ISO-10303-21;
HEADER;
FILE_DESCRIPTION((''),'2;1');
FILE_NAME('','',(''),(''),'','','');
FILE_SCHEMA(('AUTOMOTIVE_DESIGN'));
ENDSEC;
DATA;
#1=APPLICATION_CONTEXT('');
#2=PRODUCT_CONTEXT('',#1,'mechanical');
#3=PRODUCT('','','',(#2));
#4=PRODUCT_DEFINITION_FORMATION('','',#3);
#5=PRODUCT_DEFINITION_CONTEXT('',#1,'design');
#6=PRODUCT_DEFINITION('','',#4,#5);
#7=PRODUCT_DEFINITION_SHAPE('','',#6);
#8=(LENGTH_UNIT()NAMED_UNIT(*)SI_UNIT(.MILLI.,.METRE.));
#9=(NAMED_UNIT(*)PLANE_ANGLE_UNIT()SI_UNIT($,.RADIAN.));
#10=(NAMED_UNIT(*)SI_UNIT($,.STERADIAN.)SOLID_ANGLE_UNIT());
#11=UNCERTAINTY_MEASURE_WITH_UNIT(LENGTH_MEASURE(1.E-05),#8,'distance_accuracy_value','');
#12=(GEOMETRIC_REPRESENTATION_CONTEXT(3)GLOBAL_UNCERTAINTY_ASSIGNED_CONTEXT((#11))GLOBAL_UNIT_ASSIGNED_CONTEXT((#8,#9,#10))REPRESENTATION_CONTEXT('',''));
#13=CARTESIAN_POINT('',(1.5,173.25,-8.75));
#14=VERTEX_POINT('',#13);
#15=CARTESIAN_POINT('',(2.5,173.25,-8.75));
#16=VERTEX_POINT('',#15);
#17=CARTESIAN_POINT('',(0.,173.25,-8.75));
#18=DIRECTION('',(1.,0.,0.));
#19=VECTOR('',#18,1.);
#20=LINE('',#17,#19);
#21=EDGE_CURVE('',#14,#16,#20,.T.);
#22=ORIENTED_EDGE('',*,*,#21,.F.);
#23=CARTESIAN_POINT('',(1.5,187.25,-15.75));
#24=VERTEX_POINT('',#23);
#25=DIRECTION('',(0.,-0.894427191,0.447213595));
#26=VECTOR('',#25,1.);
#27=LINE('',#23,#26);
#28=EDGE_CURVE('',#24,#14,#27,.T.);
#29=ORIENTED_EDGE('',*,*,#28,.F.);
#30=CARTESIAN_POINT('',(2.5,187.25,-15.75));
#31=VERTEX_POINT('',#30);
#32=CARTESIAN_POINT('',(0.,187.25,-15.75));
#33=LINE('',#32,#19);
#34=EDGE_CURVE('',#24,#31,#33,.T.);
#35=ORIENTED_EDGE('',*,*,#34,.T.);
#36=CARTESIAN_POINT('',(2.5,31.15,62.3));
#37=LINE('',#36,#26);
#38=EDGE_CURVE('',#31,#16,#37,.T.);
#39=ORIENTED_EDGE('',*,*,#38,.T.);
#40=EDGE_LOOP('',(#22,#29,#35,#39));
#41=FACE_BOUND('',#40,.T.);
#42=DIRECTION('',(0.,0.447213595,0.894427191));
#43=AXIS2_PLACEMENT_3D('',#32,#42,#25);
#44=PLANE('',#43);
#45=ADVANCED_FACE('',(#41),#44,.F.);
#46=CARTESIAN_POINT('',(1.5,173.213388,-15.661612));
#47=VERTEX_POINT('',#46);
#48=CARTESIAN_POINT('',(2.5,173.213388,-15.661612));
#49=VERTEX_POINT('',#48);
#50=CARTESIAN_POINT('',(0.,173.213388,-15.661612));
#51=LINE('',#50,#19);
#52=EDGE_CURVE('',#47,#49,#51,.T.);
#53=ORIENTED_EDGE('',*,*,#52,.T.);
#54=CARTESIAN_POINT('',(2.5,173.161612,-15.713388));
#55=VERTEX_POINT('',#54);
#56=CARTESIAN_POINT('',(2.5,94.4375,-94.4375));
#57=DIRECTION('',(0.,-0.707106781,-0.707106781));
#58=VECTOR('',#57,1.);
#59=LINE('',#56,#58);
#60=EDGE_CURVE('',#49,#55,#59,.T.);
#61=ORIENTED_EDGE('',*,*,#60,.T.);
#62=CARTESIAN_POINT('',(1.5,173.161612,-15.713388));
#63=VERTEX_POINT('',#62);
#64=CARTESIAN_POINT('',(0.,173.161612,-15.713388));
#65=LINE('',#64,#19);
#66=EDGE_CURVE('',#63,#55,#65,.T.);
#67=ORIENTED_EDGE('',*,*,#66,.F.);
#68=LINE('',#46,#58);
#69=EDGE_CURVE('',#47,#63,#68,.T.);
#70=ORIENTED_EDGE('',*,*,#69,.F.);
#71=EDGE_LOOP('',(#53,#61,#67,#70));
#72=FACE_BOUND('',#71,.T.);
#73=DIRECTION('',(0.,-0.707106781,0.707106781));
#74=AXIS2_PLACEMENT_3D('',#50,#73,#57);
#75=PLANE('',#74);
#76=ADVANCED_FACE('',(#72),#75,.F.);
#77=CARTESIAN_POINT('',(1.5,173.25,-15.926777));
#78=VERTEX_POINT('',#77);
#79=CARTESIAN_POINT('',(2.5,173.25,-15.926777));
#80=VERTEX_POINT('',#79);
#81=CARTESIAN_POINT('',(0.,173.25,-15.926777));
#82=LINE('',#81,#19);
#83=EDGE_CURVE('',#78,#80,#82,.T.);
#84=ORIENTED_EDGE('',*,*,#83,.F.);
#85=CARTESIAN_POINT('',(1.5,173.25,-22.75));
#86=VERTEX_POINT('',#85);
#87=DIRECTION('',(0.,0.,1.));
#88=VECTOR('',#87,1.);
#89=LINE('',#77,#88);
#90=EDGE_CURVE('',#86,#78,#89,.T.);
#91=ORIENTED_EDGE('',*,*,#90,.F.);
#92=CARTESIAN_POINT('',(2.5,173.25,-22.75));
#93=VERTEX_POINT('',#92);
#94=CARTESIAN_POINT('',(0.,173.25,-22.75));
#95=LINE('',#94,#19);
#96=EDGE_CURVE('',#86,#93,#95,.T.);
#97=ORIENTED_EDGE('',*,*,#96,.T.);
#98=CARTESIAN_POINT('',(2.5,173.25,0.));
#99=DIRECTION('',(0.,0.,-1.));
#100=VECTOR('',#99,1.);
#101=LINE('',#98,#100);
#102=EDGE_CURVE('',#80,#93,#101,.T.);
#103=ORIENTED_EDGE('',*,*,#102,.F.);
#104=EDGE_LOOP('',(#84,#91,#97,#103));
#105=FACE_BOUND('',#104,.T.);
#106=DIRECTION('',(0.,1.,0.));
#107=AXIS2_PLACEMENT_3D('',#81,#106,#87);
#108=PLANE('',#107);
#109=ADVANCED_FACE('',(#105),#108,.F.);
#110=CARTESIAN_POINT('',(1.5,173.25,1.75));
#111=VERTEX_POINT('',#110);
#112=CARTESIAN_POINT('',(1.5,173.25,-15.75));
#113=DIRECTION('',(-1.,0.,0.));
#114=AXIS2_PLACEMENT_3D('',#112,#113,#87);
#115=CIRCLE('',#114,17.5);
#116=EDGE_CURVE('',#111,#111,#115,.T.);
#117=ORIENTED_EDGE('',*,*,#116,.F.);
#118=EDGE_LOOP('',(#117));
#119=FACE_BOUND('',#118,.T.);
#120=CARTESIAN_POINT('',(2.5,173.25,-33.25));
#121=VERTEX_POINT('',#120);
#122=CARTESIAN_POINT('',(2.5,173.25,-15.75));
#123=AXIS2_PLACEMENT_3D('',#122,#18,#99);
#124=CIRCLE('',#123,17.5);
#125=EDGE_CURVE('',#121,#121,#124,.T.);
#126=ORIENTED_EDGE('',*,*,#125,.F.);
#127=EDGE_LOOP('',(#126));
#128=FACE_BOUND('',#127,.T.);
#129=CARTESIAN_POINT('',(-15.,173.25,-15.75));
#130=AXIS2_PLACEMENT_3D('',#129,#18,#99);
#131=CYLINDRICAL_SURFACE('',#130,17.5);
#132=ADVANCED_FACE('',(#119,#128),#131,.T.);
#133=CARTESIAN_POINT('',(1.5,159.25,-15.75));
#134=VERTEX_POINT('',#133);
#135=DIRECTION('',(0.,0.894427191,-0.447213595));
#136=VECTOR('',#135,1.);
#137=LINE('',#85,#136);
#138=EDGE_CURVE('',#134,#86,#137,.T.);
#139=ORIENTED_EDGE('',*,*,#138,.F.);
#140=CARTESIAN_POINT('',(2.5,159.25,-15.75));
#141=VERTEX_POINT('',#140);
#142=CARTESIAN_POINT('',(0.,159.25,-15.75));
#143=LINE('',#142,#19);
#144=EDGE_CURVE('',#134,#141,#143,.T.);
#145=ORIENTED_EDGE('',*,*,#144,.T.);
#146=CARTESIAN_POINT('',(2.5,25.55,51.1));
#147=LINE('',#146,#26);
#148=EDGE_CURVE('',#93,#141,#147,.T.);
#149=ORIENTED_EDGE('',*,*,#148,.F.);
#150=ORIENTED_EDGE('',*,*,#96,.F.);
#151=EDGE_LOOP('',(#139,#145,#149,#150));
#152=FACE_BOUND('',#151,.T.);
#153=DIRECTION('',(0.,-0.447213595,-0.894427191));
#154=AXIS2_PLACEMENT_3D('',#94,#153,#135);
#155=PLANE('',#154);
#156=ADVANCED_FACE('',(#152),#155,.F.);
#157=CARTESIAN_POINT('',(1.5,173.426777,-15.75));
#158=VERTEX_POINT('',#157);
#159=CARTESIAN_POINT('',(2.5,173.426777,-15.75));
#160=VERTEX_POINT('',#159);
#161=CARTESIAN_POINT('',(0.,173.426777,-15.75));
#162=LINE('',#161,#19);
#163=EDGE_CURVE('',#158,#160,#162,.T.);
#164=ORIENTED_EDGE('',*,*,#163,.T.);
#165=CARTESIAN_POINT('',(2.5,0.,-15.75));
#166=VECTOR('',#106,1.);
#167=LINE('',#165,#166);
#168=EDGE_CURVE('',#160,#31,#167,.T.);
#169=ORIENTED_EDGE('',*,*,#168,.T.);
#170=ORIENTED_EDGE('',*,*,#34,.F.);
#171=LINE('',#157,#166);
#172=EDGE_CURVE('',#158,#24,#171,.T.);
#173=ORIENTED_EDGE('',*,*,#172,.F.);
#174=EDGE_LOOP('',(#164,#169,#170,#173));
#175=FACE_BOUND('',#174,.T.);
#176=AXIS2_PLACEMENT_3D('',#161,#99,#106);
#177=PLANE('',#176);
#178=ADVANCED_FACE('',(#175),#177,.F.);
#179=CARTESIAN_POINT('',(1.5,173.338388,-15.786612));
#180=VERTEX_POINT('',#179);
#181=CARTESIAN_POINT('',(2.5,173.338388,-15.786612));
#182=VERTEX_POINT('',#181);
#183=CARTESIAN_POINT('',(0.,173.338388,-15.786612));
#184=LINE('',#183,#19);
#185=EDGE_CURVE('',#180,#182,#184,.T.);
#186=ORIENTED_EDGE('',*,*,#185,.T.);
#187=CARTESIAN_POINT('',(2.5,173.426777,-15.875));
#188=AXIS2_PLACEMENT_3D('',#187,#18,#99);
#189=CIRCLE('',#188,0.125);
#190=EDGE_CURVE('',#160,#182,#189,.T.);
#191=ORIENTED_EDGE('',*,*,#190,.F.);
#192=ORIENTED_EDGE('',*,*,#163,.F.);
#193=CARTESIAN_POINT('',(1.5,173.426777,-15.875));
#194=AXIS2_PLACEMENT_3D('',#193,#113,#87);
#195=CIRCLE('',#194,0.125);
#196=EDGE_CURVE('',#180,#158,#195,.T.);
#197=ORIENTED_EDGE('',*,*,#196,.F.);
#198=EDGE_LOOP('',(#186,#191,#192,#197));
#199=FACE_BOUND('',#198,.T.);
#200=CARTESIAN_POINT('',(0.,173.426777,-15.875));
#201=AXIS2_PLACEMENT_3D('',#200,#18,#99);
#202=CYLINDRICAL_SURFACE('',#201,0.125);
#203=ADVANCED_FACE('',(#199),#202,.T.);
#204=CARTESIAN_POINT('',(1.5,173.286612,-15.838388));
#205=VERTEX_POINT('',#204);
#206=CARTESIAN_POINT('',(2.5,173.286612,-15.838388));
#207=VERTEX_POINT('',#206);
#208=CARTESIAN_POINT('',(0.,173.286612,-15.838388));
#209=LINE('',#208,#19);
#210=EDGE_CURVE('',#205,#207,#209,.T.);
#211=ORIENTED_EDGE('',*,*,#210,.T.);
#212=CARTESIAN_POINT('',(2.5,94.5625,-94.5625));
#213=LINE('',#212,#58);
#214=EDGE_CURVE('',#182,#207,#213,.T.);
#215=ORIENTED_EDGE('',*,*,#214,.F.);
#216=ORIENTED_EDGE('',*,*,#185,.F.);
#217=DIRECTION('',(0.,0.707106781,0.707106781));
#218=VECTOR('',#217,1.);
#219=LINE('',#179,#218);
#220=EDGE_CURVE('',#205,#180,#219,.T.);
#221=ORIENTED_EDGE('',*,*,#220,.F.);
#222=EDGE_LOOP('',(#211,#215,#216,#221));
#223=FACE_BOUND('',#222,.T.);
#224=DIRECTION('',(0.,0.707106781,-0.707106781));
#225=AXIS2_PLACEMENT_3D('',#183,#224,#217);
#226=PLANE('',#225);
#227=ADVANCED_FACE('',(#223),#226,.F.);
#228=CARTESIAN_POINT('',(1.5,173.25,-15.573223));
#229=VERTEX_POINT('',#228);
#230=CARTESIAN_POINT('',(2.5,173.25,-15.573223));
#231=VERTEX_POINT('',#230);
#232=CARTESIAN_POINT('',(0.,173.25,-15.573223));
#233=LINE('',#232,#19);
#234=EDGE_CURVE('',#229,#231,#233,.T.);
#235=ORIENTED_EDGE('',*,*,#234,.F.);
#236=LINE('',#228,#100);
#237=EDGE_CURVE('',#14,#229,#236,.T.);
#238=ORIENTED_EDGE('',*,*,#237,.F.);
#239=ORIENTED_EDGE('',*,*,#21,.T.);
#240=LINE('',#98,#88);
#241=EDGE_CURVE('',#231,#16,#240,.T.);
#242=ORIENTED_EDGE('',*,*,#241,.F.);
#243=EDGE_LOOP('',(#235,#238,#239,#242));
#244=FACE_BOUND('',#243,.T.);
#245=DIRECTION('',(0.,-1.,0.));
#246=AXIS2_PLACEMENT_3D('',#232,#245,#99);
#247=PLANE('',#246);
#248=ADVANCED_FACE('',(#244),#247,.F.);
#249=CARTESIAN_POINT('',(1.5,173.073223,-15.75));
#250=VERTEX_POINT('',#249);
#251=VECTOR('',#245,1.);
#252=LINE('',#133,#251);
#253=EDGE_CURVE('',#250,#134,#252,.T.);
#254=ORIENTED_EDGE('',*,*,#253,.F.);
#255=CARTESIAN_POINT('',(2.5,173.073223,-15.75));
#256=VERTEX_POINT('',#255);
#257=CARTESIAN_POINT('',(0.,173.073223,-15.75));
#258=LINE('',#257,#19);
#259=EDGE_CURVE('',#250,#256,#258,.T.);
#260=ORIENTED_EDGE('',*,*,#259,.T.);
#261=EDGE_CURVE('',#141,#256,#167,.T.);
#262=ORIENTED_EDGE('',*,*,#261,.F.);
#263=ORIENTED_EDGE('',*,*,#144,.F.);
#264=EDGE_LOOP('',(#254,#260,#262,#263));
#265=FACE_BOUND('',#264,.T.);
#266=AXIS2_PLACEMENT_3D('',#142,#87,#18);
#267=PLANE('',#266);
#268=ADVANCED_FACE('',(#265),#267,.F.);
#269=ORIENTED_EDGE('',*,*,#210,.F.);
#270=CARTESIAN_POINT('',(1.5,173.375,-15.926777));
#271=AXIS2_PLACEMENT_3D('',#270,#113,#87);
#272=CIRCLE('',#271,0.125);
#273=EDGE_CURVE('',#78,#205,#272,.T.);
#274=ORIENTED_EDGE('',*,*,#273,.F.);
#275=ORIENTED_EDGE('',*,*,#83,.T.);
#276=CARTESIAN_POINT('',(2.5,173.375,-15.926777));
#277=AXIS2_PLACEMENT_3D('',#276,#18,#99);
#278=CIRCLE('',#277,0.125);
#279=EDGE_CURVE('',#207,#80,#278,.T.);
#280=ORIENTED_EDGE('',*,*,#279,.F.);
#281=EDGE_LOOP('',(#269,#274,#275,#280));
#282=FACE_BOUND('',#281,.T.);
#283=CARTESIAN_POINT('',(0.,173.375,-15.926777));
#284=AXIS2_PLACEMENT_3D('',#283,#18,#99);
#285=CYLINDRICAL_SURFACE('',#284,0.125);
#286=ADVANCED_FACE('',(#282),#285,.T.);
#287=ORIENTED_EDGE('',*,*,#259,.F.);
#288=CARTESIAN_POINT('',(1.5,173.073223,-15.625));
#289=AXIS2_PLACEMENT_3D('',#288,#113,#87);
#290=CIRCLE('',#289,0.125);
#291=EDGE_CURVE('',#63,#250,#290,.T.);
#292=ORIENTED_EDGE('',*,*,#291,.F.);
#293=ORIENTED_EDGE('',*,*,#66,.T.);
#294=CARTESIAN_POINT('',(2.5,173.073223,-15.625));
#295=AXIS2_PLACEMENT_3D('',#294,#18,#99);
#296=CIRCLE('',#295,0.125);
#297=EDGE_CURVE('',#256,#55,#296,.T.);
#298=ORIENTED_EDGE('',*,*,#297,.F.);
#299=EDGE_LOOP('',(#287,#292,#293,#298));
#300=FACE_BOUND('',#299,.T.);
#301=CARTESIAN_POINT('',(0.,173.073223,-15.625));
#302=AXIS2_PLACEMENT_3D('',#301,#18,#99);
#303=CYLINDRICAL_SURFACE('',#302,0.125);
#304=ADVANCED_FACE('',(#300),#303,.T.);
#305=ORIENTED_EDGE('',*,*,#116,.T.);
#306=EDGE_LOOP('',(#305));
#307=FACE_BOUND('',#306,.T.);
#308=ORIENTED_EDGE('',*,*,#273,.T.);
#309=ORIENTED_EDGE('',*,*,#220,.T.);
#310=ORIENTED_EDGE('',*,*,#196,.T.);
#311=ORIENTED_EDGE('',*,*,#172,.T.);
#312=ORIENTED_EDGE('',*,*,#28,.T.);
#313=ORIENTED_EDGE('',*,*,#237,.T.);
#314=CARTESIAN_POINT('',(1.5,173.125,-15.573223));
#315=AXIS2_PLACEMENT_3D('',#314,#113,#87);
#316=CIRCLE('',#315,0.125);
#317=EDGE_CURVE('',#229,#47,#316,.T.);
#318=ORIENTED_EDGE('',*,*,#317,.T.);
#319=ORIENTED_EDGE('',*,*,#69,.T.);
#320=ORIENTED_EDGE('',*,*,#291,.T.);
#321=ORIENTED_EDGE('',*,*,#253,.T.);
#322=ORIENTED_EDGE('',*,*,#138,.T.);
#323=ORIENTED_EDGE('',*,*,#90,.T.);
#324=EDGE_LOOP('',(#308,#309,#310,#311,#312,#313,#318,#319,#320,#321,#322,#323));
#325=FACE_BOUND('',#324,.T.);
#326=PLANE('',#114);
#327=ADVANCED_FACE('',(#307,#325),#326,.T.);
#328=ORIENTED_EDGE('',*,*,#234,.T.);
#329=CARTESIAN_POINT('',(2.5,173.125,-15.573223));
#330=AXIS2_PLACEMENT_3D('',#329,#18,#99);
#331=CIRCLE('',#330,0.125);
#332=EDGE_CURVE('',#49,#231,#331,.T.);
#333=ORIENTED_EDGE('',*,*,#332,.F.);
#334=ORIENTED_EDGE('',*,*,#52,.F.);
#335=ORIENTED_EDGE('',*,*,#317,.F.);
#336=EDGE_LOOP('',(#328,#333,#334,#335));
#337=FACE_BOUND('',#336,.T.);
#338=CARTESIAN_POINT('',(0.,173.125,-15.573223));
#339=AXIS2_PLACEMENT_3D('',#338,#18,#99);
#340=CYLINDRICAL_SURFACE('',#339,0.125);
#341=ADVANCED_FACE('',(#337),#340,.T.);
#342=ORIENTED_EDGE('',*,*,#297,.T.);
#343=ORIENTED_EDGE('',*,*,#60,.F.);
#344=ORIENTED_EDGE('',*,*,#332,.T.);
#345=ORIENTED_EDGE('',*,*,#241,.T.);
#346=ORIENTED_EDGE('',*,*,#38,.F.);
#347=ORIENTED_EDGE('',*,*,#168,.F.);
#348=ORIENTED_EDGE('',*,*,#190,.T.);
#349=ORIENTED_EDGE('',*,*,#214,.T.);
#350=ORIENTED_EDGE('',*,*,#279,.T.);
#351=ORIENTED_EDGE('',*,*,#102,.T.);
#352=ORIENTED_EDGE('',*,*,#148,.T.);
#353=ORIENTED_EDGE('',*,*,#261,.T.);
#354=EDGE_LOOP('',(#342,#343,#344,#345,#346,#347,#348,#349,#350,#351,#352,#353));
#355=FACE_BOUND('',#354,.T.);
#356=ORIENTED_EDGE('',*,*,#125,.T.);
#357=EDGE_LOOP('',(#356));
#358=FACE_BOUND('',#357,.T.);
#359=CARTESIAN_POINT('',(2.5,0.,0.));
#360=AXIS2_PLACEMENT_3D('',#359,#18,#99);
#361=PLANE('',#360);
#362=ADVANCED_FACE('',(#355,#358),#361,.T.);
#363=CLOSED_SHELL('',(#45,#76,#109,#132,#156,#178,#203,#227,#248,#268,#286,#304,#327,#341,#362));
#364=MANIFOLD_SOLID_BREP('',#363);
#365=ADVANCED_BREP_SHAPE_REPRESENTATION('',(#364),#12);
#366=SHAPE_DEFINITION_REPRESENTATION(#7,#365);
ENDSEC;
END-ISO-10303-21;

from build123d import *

# Parameters (mm, degrees)
SKETCH1_W               = 85
SKETCH1_H               = 200
BOSS_EXTRUDE1_DEPTH     = 5
FILLET1_R               = 1
SKETCH2_R               = 17.5
CUT_EXTRUDE1_DEPTH      = 2.5
FILLET2_R               = 0.125
SKETCH3_W               = 15
SKETCH3_H               = 85
BOSS_EXTRUDE2_DEPTH     = 3
RIB1_START              = -5
RIB1_DEPTH              = 5
SKETCH5_R               = 1.5
CUT_EXTRUDE2_DEPTH      = 3
FILLET3_R               = 4
FILLET4_R               = 3
SKETCH6_OUTSIDE_W       = 130.646
SKETCH6_OUTSIDE_H       = 245.646
SKETCH6_OUTSIDE_R       = 17.5
CUT_EXTRUDE4_DEPTH      = 206.441597541
CUT_EXTRUDE5_DEPTH      = 194.642389471
CUT_EXTRUDE5_DEPTH_BACK = 194.642389471
CUT_EXTRUDE6_START      = -1.5
SKETCH9_R               = 17.5
CUT_EXTRUDE6_DEPTH      = 1.5


# Read off the part's stored shape, not the designer's step: Rib1
with BuildPart() as part:
    # Sketch1 → Boss-Extrude1 (new body)
    with BuildSketch(Plane(origin=(0, 0, 0), x_dir=(0, 0, -1), z_dir=(1, 0, 0))):
        with Locations((0, 100)):
            Rectangle(SKETCH1_W, SKETCH1_H)
        Polygon((-16, 25), (-16, 176), (-11, 176), (-11, 49), (-7, 49), (-7, 29), (-2.5, 29), (-2.5, 42), (16, 42), (16, 25), (16, 24), (15, 24), (-15, 24), (-16, 24), align=None, mode=Mode.SUBTRACT)
    extrude(amount=BOSS_EXTRUDE1_DEPTH)

    # Fillet1
    fillet1_edges = [part.edges().sort_by_distance(p)[0] for p in [
        (2.5, 42, 2.5),
        (2.5, 29, 2.5),
        (2.5, 29, 7),
        (2.5, 49, 11),
    ]]
    fillet(fillet1_edges, radius=FILLET1_R)

    # Sketch2 → Cut-Extrude1 (cut)
    with BuildSketch(Plane(origin=(5, 0, 0), x_dir=(0, 0, -1), z_dir=(1, 0, 0))):
        with Locations((15.75, 173.25)):
            Circle(SKETCH2_R)
        Polygon((15.75, 173.125), (15.625, 173.25), (8.75, 173.25), (15.75, 187.25), (15.75, 173.375), (15.875, 173.25), (22.75, 173.25), (15.75, 159.25), align=None, mode=Mode.SUBTRACT)
    extrude(amount=-CUT_EXTRUDE1_DEPTH, mode=Mode.SUBTRACT)

    # Fillet2
    fillet2_edges = [part.edges().sort_by_distance(p)[0] for p in [
        (3.75, 173.25, -15.625),
        (3.75, 173.125, -15.75),
        (3.75, 173.25, -15.875),
        (3.75, 173.375, -15.75),
    ]]
    fillet(fillet2_edges, radius=FILLET2_R)

    # Sketch3 → Boss-Extrude2 (add)
    with BuildSketch(Plane.XZ):
        with Locations((-7.5, 0)):
            Rectangle(SKETCH3_W, SKETCH3_H)
    extrude(amount=-BOSS_EXTRUDE2_DEPTH)

    # Rib1 outline → Rib1 (add)
    with BuildSketch(Plane.XY.offset(42.5).offset(RIB1_START)):
        Polygon((0, 18), (-15, 3), (0, 3), align=None)
    rib1 = extrude(amount=RIB1_DEPTH)

    # Mirror1: Rib1 across plane
    add(rib1.mirror(Plane.XY))

    # Sketch5 → Cut-Extrude2 (cut)
    with BuildSketch(Plane(origin=(0, 3, 0), x_dir=(1, 0, 0), z_dir=(0, 1, 0))):
        with Locations(Location((-7.5, 24.5, 0), (0, 0, 270))):
            Circle(SKETCH5_R)
        with Locations(Location((-7.5, 0, 0), (0, 0, 270))):
            Circle(SKETCH5_R)
        with Locations(Location((-7.5, -24.5, 0), (0, 0, 270))):
            Circle(SKETCH5_R)
    extrude(amount=-CUT_EXTRUDE2_DEPTH, mode=Mode.SUBTRACT)

    # Fillet3
    fillet3_edges = [part.edges().sort_by_distance(p)[0] for p in [
        (0, 18, 40),
        (0, 18, -40),
    ]]
    fillet(fillet3_edges, radius=FILLET3_R)

    # Fillet4
    fillet4_edges = [part.edges().sort_by_distance(p)[0] for p in [
        (0, 3, 0),
    ]]
    fillet(fillet4_edges, radius=FILLET4_R)

    # Sketch6 outside → Cut-Extrude4 (cut, through all)
    with BuildSketch(Plane(origin=(5, 0, 0), x_dir=(0, 0, -1), z_dir=(1, 0, 0))):
        with Locations((0, 100)):
            Rectangle(SKETCH6_OUTSIDE_W, SKETCH6_OUTSIDE_H)
        with Locations((15.75, 173.25)):
            Circle(SKETCH6_OUTSIDE_R, mode=Mode.SUBTRACT)
    extrude(amount=-CUT_EXTRUDE4_DEPTH, mode=Mode.SUBTRACT)

    # Sketch7 → Cut-Extrude5 (cut, two sides: drawn at the far end of the back side and taken through both)
    with BuildSketch(Plane(origin=(2.5, 0, 0), x_dir=(0, 0, -1), z_dir=(1, 0, 0)).offset(-CUT_EXTRUDE5_DEPTH_BACK)):
        with BuildLine():
            Line((22.75, 173.25), (15.75, 159.25))
            Line((15.75, 159.25), (15.75, 173.073223305))
            ThreePointArc((15.75, 173.073223305), (15.740484942, 173.121058734), (15.713388348, 173.161611652))
            Line((15.713388348, 173.161611652), (15.661611652, 173.213388348))
            ThreePointArc((15.661611652, 173.213388348), (15.621058734, 173.240484942), (15.573223305, 173.25))
            Line((15.573223305, 173.25), (8.75, 173.25))
            Line((8.75, 173.25), (15.75, 187.25))
            Line((15.75, 187.25), (15.75, 173.426776695))
            ThreePointArc((15.75, 173.426776695), (15.759515058, 173.378941266), (15.786611652, 173.338388348))
            Line((15.786611652, 173.338388348), (15.838388348, 173.286611652))
            ThreePointArc((15.838388348, 173.286611652), (15.878941266, 173.259515058), (15.926776695, 173.25))
            Line((15.926776695, 173.25), (22.75, 173.25))
        make_face()
    extrude(amount=CUT_EXTRUDE5_DEPTH + CUT_EXTRUDE5_DEPTH_BACK, mode=Mode.SUBTRACT)

    # Sketch9 → Cut-Extrude6 (cut)
    with BuildSketch(Plane.ZY.offset(CUT_EXTRUDE6_START)):
        with Locations(Location((-15.75, 173.25, 0), (0, 0, 180))):
            Circle(SKETCH9_R)
    extrude(amount=CUT_EXTRUDE6_DEPTH, mode=Mode.SUBTRACT)


solid = part.part
